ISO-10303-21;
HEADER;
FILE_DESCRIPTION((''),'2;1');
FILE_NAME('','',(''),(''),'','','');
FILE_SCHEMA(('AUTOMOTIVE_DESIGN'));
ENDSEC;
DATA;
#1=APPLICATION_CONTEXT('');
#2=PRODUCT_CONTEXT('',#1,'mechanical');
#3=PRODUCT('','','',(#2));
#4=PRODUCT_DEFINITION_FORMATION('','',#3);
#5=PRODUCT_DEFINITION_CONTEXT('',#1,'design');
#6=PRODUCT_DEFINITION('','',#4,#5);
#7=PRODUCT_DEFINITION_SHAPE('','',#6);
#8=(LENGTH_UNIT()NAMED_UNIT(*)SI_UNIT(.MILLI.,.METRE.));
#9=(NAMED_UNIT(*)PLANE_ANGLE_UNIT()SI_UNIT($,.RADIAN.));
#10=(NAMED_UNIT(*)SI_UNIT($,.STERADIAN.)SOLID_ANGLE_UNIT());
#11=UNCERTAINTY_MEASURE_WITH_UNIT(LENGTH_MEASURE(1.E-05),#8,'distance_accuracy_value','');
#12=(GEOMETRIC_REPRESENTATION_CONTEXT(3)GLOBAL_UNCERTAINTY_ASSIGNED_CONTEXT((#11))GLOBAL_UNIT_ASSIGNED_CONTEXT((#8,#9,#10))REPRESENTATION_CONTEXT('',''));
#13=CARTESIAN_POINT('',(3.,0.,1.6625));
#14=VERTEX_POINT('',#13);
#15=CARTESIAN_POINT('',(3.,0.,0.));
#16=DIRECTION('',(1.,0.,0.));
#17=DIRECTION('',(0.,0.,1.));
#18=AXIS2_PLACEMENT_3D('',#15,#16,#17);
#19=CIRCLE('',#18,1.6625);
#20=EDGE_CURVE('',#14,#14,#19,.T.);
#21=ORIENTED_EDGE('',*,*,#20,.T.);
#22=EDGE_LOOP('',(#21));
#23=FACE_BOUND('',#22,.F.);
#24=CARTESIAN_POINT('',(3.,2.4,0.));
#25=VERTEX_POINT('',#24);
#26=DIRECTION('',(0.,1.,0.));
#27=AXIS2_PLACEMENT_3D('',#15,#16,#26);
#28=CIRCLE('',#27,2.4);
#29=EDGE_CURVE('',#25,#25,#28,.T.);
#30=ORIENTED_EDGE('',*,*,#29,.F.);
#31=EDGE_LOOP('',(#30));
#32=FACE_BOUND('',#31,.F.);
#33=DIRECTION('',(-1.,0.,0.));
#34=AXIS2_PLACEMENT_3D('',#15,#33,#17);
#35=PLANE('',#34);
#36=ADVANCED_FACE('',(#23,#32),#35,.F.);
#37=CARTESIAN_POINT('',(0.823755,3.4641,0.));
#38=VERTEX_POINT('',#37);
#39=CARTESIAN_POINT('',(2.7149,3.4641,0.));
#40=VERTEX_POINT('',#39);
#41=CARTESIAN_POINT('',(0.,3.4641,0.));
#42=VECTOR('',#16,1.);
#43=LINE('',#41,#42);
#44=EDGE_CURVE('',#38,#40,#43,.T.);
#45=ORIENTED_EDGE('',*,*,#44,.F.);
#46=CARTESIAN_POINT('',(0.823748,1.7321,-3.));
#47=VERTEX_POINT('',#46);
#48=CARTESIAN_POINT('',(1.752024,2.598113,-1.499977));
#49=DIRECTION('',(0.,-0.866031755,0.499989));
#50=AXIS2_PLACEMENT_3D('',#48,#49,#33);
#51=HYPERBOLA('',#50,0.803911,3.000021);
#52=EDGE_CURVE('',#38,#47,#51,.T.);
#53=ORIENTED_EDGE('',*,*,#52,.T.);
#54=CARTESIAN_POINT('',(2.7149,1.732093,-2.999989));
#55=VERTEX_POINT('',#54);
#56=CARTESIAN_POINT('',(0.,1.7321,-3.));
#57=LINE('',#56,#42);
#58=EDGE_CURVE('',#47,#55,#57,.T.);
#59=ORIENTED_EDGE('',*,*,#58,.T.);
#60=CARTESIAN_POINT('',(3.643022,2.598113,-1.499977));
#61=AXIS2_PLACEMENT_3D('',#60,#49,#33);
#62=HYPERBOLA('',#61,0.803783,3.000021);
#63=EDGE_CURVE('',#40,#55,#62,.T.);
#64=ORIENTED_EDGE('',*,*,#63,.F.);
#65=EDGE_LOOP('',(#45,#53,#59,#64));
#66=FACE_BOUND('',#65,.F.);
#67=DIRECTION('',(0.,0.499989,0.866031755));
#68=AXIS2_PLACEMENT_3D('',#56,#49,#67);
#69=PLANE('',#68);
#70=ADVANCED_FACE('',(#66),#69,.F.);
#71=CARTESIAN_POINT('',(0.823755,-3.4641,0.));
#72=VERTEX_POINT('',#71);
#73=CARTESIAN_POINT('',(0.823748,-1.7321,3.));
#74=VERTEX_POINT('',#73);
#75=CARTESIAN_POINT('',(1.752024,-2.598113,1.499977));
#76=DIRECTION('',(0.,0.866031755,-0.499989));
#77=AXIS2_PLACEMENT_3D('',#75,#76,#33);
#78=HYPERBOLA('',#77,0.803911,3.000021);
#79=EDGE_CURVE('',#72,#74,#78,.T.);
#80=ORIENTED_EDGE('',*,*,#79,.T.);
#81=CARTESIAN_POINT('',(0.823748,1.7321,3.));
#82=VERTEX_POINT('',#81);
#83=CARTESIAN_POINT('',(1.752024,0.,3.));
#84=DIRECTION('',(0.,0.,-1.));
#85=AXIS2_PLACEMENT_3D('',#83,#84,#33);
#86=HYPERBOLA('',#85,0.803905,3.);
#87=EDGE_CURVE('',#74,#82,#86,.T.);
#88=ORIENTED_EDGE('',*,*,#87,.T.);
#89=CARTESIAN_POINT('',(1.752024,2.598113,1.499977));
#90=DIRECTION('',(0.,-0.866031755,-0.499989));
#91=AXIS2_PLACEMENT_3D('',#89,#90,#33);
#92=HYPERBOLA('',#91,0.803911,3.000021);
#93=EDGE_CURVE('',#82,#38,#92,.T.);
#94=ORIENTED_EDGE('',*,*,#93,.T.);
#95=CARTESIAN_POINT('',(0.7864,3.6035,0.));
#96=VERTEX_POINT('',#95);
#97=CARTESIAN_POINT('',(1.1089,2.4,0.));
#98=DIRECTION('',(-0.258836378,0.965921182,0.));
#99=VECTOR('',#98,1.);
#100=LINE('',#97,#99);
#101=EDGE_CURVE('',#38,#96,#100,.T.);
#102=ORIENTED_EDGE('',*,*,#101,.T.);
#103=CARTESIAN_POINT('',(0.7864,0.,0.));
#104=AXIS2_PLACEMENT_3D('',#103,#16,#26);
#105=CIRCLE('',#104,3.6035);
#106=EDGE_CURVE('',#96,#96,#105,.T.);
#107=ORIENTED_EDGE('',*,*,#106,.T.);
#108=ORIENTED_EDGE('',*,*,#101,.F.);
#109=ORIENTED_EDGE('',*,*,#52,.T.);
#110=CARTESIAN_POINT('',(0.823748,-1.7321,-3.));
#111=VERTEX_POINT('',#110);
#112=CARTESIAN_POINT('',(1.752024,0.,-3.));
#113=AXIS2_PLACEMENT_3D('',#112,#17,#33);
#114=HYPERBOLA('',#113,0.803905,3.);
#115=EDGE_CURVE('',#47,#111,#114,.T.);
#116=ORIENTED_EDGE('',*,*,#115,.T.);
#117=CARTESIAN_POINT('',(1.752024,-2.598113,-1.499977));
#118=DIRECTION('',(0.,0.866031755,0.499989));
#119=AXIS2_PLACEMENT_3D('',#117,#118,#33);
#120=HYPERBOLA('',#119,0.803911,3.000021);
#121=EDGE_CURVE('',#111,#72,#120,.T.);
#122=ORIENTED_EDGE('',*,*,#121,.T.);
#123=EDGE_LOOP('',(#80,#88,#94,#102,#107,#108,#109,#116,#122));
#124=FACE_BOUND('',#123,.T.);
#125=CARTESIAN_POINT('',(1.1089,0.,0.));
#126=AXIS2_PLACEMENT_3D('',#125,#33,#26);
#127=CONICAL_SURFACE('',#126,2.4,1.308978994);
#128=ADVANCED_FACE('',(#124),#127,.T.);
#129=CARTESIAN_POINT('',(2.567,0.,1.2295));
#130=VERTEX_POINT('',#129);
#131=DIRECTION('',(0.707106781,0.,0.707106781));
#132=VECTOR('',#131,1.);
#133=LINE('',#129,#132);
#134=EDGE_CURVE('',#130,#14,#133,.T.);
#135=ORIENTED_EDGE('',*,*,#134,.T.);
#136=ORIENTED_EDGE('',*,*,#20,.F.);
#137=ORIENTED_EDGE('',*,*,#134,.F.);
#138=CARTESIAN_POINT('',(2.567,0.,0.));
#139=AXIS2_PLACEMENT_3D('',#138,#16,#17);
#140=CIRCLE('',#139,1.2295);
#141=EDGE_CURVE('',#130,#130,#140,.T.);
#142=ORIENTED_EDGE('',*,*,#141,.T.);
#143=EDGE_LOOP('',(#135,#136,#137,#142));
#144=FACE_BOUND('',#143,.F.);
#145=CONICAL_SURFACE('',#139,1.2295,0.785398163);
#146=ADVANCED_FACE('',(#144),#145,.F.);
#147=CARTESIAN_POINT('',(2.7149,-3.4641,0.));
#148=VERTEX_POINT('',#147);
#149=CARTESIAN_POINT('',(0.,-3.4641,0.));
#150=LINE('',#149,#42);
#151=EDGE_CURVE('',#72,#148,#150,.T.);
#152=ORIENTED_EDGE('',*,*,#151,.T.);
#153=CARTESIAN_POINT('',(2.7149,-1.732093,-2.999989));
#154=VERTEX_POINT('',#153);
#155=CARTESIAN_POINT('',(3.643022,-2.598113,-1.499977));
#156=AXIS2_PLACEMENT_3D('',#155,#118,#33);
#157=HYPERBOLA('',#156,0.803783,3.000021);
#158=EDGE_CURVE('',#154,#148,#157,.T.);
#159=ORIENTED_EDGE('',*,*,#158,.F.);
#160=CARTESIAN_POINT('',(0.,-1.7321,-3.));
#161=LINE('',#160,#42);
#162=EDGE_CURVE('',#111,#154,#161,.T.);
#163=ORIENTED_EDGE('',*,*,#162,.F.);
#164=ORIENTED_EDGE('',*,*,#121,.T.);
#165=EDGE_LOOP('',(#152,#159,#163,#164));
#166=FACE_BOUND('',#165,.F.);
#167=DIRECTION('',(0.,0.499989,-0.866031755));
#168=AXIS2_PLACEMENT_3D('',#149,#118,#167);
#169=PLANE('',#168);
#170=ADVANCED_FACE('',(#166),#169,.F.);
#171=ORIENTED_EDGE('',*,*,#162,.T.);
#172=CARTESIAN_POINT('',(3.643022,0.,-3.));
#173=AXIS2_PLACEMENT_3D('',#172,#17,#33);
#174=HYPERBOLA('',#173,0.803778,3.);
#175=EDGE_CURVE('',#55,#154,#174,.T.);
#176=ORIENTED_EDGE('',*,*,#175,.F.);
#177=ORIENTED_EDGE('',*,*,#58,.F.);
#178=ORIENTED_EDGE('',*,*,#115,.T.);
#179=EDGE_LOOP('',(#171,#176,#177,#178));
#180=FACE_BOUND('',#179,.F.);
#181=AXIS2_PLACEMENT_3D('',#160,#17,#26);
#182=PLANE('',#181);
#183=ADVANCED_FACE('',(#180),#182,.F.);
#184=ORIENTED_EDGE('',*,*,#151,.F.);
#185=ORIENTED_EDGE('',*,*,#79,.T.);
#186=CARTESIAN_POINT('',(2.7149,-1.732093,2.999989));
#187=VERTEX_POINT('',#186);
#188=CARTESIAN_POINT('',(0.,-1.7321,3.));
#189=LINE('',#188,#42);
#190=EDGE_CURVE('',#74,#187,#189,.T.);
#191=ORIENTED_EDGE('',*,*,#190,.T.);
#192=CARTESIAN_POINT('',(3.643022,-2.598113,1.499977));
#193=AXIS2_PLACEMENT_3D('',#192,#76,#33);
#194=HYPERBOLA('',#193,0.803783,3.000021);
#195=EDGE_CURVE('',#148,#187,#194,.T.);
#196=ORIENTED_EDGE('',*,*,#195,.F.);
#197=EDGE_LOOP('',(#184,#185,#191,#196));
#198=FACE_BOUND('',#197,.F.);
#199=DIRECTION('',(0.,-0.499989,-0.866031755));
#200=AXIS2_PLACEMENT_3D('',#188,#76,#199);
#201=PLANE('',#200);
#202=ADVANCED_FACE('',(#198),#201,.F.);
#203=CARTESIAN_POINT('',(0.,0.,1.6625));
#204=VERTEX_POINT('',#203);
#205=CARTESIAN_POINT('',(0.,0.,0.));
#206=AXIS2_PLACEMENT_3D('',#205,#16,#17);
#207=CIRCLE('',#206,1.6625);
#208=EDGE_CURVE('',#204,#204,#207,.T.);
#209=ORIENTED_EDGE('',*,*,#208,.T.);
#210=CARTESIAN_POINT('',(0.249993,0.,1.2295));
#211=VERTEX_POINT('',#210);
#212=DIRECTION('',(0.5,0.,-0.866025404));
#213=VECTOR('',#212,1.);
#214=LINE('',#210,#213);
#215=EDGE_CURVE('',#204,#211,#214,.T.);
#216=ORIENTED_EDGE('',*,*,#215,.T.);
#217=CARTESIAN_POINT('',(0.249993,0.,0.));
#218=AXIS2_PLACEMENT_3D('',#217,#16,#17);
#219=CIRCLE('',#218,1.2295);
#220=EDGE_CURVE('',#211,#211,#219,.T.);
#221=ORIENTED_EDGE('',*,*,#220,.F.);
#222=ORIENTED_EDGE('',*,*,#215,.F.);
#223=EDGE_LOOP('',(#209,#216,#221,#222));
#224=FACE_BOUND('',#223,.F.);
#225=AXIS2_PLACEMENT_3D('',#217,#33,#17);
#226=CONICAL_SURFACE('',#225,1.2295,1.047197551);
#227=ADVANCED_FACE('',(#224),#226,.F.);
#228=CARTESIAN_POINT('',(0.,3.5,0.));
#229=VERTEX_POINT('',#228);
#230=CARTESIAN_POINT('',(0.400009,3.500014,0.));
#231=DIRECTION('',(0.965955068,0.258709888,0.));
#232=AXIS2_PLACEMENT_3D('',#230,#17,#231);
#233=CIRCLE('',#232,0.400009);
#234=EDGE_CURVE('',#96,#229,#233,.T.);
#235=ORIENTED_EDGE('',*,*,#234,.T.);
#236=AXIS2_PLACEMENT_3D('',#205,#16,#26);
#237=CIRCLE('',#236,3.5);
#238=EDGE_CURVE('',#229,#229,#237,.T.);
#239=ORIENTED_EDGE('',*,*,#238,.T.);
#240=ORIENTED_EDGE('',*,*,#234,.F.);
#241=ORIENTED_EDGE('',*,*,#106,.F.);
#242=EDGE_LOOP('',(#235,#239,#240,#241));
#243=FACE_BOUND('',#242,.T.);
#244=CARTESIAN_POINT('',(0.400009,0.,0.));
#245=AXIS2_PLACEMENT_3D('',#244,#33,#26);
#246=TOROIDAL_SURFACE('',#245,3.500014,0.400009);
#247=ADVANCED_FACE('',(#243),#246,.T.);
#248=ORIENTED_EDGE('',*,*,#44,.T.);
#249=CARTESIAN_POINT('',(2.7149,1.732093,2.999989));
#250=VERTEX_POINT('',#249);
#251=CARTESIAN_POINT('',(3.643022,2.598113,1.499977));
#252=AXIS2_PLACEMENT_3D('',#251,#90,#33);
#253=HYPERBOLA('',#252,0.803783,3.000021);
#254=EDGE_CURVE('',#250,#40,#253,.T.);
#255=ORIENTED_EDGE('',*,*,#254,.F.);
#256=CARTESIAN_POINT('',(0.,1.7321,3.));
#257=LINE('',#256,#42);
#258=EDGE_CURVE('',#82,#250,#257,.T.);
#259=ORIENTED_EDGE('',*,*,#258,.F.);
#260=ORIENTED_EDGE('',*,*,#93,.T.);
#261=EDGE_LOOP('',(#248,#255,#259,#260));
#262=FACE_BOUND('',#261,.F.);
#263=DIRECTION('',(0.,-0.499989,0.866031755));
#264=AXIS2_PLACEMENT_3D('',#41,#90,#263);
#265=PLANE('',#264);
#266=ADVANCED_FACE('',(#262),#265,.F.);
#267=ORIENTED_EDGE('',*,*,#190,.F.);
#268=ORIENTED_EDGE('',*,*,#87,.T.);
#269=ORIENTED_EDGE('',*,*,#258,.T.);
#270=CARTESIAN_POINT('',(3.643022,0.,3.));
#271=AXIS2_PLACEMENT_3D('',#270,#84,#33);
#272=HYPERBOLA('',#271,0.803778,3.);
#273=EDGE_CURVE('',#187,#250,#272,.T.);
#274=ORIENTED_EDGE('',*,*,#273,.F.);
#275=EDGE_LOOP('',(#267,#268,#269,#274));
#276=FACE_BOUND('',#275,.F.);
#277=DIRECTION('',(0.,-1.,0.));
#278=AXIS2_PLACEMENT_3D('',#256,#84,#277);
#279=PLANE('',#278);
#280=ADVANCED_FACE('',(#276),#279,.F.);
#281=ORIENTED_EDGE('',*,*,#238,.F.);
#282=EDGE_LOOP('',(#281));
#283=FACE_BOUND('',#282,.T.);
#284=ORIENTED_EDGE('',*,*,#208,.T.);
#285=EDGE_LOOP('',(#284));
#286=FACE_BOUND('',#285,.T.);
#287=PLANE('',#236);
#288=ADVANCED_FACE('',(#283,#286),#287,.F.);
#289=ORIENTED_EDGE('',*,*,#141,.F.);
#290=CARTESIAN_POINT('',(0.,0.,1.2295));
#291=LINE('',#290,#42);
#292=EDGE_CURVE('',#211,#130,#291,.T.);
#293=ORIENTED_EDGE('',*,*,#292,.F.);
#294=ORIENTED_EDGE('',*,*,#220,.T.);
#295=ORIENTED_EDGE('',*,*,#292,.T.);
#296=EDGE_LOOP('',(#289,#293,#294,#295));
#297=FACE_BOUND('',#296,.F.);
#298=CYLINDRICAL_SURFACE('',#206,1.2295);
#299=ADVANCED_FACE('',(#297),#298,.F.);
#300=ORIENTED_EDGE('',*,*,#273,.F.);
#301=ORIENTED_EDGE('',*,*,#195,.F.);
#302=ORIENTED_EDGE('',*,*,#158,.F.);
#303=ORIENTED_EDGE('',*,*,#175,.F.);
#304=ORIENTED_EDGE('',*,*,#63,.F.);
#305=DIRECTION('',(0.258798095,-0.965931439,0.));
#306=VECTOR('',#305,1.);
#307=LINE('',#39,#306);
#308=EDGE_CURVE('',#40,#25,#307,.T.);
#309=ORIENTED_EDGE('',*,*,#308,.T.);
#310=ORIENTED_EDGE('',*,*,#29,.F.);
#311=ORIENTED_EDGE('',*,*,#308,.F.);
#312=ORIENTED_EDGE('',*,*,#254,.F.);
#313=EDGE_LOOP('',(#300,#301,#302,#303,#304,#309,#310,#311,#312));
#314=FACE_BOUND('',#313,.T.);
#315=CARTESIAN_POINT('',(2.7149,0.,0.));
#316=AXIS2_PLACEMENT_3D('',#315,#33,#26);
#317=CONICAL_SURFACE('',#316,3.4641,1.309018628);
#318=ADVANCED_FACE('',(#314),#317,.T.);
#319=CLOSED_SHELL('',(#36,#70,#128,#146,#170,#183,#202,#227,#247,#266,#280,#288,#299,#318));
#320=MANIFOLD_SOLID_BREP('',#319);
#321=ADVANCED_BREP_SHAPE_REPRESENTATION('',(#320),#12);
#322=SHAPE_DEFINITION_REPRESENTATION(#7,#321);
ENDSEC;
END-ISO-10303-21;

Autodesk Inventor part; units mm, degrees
ref_plane "YZ Plane" through (0, 0, 0) normal (1, 0, 0) x (0, 1, 0)
ref_plane "XZ Plane" through (0, 0, 0) normal (0, 1, 0) x (-1, 0, 0)
sketch "Skizze1" plane through (0, 0, 0) normal (0, 0, 1) x (1, 0, 0)
  line L0 (-0.8145, 0) -> (4.5691, 0) projected
  line L1 (1.1089, 2.4) -> (0.7864, 3.6035)
  line L2 (1.1089, 2.4) -> (3.8, 2.4) construction
  line L3 (3.8, 2.4) -> (3.8, 0) construction
  arc A0 (0.7864, 3.6035) -> (0, 3.5) centre (0.4, 3.5) ccw
  line L4 (1.1089, 2.4) -> (1.1089, 0)
  line L5 (0, -0.7897) -> (0, 4.738) projected
  point P0 (0, 0)
  dimension "d2" = 4.8
  dimension "d4" = 7.8
  dimension "d5" = 0.4
  dimension "d15" = 3.8
  dimension "d16" = 15
revolve "Ring" add sketch "Skizze1" angle 360 about axis through (-10, 0, 0) along (1, 0, 0)
sketch "Skizze2" plane through (0, 0, 0) normal (-1, 0, 0) x (0, 0, 1)
  circle A0 centre (0, 0) radius 4.9
  line L0 (-3, -1.7321) -> (-3, 1.7321)
  line L1 (-3, 1.7321) -> (0, 3.4641)
  line L2 (0, 3.4641) -> (3, 1.7321)
  line L3 (3, 1.7321) -> (3, -1.7321)
  line L4 (3, -1.7321) -> (0, -3.4641)
  line L5 (0, -3.4641) -> (-3, -1.7321)
  dimension "d55" = 6
extrude "Körper" add sketch "Skizze2" against normal blind 3 contours L0 L1 L2 L3 L4 L5
sketch "Skizze3" plane through (0, 0, 0) normal (0, 0, 1) x (1, 0, 0)
  line L0 (0.8237, 3.4641) -> (3, 3.4641) projected
  line L1 (3, 1.7321) -> (3, 3.4641) projected
  line L2 (0, -3.5) -> (0, 3.5) projected
  line L3 (-0.6, 0) -> (3.6, 0) projected
  line L4 (2.7149, 3.4641) -> (3, 2.4)
  dimension "d10" = 15
  dimension "d11" = 4.8
revolve "Fase1" cut sketch "Skizze3" angle 360 about axis through (-10, 0, 0) along (1, 0, 0)
sketch "Skizze4" plane through (0, 0, 0) normal (-1, 0, 0) x (0, 0, 1)
  circle A0 centre (0, 0) radius 3.5 projected
hole "Gewinde" at (0, 0, 0) direction (1, 0, 0) diameter 2.459 end through all thread size "M3x0.5" class "6H" standard "ISO Metric profile"
chamfer "Fase2" distance 0.433 angle 30 1 edges at (0, 0, -1.2295) measured on face at (0, 2.7063, -0.3286)
ref_plane "Work Plane1" through (11.4315, 0, 0) normal (0, 0, -1) x (-1, 0, 0)
chamfer "Fase3" distance 0.433 angle 45 1 edges at (3, 0, -1.2295)
equation "\"d2\" = 0.6 * SW"
equation "\"d16\" = 0.6 * KEWI"
equation "\"d7\" = 0.6 * KOH"
equation "\"d10\" = ANG1"
equation "\"d11\" = 0.6 * SW0"
equation "\"d12\" = -0.5 * GD1 + 0.5 * NND"
equation "\"d46\" = -0.5 * GD1 + 0.5 * NND"
equation "\"d51\" = -0.5 * GD1 + 0.5 * NND"
equation "\"ANG1\" = 15deg"
equation "\"KEWI\" = 25deg"
equation "\"NND\" = 5"
equation "\"LADI\" = 11.8"
equation "\"SW\" = 8"
equation "\"PHH\" = RR"
equation "\"KOH\" = NND"
equation "\"SW0\" = SW"
equation "\"d1\" = LADI"
equation "\"d3\" = PHH"
equation "\"GUL\" = 0.541266 * PTC"
equation "\"RR\" = 1"
equation "\"THREADDIA\" = 5"
equation "\"TOA\" = 30deg"
equation "\"PTC\" = 0.8"
equation "\"GAL\" = 0.541266 * PTC"
equation "\"E0\" = 1.155 * SW"
equation "\"GD1\" = 4.133975"
properties part number "DIN 6923 - M5" material "Stahl, weich"
